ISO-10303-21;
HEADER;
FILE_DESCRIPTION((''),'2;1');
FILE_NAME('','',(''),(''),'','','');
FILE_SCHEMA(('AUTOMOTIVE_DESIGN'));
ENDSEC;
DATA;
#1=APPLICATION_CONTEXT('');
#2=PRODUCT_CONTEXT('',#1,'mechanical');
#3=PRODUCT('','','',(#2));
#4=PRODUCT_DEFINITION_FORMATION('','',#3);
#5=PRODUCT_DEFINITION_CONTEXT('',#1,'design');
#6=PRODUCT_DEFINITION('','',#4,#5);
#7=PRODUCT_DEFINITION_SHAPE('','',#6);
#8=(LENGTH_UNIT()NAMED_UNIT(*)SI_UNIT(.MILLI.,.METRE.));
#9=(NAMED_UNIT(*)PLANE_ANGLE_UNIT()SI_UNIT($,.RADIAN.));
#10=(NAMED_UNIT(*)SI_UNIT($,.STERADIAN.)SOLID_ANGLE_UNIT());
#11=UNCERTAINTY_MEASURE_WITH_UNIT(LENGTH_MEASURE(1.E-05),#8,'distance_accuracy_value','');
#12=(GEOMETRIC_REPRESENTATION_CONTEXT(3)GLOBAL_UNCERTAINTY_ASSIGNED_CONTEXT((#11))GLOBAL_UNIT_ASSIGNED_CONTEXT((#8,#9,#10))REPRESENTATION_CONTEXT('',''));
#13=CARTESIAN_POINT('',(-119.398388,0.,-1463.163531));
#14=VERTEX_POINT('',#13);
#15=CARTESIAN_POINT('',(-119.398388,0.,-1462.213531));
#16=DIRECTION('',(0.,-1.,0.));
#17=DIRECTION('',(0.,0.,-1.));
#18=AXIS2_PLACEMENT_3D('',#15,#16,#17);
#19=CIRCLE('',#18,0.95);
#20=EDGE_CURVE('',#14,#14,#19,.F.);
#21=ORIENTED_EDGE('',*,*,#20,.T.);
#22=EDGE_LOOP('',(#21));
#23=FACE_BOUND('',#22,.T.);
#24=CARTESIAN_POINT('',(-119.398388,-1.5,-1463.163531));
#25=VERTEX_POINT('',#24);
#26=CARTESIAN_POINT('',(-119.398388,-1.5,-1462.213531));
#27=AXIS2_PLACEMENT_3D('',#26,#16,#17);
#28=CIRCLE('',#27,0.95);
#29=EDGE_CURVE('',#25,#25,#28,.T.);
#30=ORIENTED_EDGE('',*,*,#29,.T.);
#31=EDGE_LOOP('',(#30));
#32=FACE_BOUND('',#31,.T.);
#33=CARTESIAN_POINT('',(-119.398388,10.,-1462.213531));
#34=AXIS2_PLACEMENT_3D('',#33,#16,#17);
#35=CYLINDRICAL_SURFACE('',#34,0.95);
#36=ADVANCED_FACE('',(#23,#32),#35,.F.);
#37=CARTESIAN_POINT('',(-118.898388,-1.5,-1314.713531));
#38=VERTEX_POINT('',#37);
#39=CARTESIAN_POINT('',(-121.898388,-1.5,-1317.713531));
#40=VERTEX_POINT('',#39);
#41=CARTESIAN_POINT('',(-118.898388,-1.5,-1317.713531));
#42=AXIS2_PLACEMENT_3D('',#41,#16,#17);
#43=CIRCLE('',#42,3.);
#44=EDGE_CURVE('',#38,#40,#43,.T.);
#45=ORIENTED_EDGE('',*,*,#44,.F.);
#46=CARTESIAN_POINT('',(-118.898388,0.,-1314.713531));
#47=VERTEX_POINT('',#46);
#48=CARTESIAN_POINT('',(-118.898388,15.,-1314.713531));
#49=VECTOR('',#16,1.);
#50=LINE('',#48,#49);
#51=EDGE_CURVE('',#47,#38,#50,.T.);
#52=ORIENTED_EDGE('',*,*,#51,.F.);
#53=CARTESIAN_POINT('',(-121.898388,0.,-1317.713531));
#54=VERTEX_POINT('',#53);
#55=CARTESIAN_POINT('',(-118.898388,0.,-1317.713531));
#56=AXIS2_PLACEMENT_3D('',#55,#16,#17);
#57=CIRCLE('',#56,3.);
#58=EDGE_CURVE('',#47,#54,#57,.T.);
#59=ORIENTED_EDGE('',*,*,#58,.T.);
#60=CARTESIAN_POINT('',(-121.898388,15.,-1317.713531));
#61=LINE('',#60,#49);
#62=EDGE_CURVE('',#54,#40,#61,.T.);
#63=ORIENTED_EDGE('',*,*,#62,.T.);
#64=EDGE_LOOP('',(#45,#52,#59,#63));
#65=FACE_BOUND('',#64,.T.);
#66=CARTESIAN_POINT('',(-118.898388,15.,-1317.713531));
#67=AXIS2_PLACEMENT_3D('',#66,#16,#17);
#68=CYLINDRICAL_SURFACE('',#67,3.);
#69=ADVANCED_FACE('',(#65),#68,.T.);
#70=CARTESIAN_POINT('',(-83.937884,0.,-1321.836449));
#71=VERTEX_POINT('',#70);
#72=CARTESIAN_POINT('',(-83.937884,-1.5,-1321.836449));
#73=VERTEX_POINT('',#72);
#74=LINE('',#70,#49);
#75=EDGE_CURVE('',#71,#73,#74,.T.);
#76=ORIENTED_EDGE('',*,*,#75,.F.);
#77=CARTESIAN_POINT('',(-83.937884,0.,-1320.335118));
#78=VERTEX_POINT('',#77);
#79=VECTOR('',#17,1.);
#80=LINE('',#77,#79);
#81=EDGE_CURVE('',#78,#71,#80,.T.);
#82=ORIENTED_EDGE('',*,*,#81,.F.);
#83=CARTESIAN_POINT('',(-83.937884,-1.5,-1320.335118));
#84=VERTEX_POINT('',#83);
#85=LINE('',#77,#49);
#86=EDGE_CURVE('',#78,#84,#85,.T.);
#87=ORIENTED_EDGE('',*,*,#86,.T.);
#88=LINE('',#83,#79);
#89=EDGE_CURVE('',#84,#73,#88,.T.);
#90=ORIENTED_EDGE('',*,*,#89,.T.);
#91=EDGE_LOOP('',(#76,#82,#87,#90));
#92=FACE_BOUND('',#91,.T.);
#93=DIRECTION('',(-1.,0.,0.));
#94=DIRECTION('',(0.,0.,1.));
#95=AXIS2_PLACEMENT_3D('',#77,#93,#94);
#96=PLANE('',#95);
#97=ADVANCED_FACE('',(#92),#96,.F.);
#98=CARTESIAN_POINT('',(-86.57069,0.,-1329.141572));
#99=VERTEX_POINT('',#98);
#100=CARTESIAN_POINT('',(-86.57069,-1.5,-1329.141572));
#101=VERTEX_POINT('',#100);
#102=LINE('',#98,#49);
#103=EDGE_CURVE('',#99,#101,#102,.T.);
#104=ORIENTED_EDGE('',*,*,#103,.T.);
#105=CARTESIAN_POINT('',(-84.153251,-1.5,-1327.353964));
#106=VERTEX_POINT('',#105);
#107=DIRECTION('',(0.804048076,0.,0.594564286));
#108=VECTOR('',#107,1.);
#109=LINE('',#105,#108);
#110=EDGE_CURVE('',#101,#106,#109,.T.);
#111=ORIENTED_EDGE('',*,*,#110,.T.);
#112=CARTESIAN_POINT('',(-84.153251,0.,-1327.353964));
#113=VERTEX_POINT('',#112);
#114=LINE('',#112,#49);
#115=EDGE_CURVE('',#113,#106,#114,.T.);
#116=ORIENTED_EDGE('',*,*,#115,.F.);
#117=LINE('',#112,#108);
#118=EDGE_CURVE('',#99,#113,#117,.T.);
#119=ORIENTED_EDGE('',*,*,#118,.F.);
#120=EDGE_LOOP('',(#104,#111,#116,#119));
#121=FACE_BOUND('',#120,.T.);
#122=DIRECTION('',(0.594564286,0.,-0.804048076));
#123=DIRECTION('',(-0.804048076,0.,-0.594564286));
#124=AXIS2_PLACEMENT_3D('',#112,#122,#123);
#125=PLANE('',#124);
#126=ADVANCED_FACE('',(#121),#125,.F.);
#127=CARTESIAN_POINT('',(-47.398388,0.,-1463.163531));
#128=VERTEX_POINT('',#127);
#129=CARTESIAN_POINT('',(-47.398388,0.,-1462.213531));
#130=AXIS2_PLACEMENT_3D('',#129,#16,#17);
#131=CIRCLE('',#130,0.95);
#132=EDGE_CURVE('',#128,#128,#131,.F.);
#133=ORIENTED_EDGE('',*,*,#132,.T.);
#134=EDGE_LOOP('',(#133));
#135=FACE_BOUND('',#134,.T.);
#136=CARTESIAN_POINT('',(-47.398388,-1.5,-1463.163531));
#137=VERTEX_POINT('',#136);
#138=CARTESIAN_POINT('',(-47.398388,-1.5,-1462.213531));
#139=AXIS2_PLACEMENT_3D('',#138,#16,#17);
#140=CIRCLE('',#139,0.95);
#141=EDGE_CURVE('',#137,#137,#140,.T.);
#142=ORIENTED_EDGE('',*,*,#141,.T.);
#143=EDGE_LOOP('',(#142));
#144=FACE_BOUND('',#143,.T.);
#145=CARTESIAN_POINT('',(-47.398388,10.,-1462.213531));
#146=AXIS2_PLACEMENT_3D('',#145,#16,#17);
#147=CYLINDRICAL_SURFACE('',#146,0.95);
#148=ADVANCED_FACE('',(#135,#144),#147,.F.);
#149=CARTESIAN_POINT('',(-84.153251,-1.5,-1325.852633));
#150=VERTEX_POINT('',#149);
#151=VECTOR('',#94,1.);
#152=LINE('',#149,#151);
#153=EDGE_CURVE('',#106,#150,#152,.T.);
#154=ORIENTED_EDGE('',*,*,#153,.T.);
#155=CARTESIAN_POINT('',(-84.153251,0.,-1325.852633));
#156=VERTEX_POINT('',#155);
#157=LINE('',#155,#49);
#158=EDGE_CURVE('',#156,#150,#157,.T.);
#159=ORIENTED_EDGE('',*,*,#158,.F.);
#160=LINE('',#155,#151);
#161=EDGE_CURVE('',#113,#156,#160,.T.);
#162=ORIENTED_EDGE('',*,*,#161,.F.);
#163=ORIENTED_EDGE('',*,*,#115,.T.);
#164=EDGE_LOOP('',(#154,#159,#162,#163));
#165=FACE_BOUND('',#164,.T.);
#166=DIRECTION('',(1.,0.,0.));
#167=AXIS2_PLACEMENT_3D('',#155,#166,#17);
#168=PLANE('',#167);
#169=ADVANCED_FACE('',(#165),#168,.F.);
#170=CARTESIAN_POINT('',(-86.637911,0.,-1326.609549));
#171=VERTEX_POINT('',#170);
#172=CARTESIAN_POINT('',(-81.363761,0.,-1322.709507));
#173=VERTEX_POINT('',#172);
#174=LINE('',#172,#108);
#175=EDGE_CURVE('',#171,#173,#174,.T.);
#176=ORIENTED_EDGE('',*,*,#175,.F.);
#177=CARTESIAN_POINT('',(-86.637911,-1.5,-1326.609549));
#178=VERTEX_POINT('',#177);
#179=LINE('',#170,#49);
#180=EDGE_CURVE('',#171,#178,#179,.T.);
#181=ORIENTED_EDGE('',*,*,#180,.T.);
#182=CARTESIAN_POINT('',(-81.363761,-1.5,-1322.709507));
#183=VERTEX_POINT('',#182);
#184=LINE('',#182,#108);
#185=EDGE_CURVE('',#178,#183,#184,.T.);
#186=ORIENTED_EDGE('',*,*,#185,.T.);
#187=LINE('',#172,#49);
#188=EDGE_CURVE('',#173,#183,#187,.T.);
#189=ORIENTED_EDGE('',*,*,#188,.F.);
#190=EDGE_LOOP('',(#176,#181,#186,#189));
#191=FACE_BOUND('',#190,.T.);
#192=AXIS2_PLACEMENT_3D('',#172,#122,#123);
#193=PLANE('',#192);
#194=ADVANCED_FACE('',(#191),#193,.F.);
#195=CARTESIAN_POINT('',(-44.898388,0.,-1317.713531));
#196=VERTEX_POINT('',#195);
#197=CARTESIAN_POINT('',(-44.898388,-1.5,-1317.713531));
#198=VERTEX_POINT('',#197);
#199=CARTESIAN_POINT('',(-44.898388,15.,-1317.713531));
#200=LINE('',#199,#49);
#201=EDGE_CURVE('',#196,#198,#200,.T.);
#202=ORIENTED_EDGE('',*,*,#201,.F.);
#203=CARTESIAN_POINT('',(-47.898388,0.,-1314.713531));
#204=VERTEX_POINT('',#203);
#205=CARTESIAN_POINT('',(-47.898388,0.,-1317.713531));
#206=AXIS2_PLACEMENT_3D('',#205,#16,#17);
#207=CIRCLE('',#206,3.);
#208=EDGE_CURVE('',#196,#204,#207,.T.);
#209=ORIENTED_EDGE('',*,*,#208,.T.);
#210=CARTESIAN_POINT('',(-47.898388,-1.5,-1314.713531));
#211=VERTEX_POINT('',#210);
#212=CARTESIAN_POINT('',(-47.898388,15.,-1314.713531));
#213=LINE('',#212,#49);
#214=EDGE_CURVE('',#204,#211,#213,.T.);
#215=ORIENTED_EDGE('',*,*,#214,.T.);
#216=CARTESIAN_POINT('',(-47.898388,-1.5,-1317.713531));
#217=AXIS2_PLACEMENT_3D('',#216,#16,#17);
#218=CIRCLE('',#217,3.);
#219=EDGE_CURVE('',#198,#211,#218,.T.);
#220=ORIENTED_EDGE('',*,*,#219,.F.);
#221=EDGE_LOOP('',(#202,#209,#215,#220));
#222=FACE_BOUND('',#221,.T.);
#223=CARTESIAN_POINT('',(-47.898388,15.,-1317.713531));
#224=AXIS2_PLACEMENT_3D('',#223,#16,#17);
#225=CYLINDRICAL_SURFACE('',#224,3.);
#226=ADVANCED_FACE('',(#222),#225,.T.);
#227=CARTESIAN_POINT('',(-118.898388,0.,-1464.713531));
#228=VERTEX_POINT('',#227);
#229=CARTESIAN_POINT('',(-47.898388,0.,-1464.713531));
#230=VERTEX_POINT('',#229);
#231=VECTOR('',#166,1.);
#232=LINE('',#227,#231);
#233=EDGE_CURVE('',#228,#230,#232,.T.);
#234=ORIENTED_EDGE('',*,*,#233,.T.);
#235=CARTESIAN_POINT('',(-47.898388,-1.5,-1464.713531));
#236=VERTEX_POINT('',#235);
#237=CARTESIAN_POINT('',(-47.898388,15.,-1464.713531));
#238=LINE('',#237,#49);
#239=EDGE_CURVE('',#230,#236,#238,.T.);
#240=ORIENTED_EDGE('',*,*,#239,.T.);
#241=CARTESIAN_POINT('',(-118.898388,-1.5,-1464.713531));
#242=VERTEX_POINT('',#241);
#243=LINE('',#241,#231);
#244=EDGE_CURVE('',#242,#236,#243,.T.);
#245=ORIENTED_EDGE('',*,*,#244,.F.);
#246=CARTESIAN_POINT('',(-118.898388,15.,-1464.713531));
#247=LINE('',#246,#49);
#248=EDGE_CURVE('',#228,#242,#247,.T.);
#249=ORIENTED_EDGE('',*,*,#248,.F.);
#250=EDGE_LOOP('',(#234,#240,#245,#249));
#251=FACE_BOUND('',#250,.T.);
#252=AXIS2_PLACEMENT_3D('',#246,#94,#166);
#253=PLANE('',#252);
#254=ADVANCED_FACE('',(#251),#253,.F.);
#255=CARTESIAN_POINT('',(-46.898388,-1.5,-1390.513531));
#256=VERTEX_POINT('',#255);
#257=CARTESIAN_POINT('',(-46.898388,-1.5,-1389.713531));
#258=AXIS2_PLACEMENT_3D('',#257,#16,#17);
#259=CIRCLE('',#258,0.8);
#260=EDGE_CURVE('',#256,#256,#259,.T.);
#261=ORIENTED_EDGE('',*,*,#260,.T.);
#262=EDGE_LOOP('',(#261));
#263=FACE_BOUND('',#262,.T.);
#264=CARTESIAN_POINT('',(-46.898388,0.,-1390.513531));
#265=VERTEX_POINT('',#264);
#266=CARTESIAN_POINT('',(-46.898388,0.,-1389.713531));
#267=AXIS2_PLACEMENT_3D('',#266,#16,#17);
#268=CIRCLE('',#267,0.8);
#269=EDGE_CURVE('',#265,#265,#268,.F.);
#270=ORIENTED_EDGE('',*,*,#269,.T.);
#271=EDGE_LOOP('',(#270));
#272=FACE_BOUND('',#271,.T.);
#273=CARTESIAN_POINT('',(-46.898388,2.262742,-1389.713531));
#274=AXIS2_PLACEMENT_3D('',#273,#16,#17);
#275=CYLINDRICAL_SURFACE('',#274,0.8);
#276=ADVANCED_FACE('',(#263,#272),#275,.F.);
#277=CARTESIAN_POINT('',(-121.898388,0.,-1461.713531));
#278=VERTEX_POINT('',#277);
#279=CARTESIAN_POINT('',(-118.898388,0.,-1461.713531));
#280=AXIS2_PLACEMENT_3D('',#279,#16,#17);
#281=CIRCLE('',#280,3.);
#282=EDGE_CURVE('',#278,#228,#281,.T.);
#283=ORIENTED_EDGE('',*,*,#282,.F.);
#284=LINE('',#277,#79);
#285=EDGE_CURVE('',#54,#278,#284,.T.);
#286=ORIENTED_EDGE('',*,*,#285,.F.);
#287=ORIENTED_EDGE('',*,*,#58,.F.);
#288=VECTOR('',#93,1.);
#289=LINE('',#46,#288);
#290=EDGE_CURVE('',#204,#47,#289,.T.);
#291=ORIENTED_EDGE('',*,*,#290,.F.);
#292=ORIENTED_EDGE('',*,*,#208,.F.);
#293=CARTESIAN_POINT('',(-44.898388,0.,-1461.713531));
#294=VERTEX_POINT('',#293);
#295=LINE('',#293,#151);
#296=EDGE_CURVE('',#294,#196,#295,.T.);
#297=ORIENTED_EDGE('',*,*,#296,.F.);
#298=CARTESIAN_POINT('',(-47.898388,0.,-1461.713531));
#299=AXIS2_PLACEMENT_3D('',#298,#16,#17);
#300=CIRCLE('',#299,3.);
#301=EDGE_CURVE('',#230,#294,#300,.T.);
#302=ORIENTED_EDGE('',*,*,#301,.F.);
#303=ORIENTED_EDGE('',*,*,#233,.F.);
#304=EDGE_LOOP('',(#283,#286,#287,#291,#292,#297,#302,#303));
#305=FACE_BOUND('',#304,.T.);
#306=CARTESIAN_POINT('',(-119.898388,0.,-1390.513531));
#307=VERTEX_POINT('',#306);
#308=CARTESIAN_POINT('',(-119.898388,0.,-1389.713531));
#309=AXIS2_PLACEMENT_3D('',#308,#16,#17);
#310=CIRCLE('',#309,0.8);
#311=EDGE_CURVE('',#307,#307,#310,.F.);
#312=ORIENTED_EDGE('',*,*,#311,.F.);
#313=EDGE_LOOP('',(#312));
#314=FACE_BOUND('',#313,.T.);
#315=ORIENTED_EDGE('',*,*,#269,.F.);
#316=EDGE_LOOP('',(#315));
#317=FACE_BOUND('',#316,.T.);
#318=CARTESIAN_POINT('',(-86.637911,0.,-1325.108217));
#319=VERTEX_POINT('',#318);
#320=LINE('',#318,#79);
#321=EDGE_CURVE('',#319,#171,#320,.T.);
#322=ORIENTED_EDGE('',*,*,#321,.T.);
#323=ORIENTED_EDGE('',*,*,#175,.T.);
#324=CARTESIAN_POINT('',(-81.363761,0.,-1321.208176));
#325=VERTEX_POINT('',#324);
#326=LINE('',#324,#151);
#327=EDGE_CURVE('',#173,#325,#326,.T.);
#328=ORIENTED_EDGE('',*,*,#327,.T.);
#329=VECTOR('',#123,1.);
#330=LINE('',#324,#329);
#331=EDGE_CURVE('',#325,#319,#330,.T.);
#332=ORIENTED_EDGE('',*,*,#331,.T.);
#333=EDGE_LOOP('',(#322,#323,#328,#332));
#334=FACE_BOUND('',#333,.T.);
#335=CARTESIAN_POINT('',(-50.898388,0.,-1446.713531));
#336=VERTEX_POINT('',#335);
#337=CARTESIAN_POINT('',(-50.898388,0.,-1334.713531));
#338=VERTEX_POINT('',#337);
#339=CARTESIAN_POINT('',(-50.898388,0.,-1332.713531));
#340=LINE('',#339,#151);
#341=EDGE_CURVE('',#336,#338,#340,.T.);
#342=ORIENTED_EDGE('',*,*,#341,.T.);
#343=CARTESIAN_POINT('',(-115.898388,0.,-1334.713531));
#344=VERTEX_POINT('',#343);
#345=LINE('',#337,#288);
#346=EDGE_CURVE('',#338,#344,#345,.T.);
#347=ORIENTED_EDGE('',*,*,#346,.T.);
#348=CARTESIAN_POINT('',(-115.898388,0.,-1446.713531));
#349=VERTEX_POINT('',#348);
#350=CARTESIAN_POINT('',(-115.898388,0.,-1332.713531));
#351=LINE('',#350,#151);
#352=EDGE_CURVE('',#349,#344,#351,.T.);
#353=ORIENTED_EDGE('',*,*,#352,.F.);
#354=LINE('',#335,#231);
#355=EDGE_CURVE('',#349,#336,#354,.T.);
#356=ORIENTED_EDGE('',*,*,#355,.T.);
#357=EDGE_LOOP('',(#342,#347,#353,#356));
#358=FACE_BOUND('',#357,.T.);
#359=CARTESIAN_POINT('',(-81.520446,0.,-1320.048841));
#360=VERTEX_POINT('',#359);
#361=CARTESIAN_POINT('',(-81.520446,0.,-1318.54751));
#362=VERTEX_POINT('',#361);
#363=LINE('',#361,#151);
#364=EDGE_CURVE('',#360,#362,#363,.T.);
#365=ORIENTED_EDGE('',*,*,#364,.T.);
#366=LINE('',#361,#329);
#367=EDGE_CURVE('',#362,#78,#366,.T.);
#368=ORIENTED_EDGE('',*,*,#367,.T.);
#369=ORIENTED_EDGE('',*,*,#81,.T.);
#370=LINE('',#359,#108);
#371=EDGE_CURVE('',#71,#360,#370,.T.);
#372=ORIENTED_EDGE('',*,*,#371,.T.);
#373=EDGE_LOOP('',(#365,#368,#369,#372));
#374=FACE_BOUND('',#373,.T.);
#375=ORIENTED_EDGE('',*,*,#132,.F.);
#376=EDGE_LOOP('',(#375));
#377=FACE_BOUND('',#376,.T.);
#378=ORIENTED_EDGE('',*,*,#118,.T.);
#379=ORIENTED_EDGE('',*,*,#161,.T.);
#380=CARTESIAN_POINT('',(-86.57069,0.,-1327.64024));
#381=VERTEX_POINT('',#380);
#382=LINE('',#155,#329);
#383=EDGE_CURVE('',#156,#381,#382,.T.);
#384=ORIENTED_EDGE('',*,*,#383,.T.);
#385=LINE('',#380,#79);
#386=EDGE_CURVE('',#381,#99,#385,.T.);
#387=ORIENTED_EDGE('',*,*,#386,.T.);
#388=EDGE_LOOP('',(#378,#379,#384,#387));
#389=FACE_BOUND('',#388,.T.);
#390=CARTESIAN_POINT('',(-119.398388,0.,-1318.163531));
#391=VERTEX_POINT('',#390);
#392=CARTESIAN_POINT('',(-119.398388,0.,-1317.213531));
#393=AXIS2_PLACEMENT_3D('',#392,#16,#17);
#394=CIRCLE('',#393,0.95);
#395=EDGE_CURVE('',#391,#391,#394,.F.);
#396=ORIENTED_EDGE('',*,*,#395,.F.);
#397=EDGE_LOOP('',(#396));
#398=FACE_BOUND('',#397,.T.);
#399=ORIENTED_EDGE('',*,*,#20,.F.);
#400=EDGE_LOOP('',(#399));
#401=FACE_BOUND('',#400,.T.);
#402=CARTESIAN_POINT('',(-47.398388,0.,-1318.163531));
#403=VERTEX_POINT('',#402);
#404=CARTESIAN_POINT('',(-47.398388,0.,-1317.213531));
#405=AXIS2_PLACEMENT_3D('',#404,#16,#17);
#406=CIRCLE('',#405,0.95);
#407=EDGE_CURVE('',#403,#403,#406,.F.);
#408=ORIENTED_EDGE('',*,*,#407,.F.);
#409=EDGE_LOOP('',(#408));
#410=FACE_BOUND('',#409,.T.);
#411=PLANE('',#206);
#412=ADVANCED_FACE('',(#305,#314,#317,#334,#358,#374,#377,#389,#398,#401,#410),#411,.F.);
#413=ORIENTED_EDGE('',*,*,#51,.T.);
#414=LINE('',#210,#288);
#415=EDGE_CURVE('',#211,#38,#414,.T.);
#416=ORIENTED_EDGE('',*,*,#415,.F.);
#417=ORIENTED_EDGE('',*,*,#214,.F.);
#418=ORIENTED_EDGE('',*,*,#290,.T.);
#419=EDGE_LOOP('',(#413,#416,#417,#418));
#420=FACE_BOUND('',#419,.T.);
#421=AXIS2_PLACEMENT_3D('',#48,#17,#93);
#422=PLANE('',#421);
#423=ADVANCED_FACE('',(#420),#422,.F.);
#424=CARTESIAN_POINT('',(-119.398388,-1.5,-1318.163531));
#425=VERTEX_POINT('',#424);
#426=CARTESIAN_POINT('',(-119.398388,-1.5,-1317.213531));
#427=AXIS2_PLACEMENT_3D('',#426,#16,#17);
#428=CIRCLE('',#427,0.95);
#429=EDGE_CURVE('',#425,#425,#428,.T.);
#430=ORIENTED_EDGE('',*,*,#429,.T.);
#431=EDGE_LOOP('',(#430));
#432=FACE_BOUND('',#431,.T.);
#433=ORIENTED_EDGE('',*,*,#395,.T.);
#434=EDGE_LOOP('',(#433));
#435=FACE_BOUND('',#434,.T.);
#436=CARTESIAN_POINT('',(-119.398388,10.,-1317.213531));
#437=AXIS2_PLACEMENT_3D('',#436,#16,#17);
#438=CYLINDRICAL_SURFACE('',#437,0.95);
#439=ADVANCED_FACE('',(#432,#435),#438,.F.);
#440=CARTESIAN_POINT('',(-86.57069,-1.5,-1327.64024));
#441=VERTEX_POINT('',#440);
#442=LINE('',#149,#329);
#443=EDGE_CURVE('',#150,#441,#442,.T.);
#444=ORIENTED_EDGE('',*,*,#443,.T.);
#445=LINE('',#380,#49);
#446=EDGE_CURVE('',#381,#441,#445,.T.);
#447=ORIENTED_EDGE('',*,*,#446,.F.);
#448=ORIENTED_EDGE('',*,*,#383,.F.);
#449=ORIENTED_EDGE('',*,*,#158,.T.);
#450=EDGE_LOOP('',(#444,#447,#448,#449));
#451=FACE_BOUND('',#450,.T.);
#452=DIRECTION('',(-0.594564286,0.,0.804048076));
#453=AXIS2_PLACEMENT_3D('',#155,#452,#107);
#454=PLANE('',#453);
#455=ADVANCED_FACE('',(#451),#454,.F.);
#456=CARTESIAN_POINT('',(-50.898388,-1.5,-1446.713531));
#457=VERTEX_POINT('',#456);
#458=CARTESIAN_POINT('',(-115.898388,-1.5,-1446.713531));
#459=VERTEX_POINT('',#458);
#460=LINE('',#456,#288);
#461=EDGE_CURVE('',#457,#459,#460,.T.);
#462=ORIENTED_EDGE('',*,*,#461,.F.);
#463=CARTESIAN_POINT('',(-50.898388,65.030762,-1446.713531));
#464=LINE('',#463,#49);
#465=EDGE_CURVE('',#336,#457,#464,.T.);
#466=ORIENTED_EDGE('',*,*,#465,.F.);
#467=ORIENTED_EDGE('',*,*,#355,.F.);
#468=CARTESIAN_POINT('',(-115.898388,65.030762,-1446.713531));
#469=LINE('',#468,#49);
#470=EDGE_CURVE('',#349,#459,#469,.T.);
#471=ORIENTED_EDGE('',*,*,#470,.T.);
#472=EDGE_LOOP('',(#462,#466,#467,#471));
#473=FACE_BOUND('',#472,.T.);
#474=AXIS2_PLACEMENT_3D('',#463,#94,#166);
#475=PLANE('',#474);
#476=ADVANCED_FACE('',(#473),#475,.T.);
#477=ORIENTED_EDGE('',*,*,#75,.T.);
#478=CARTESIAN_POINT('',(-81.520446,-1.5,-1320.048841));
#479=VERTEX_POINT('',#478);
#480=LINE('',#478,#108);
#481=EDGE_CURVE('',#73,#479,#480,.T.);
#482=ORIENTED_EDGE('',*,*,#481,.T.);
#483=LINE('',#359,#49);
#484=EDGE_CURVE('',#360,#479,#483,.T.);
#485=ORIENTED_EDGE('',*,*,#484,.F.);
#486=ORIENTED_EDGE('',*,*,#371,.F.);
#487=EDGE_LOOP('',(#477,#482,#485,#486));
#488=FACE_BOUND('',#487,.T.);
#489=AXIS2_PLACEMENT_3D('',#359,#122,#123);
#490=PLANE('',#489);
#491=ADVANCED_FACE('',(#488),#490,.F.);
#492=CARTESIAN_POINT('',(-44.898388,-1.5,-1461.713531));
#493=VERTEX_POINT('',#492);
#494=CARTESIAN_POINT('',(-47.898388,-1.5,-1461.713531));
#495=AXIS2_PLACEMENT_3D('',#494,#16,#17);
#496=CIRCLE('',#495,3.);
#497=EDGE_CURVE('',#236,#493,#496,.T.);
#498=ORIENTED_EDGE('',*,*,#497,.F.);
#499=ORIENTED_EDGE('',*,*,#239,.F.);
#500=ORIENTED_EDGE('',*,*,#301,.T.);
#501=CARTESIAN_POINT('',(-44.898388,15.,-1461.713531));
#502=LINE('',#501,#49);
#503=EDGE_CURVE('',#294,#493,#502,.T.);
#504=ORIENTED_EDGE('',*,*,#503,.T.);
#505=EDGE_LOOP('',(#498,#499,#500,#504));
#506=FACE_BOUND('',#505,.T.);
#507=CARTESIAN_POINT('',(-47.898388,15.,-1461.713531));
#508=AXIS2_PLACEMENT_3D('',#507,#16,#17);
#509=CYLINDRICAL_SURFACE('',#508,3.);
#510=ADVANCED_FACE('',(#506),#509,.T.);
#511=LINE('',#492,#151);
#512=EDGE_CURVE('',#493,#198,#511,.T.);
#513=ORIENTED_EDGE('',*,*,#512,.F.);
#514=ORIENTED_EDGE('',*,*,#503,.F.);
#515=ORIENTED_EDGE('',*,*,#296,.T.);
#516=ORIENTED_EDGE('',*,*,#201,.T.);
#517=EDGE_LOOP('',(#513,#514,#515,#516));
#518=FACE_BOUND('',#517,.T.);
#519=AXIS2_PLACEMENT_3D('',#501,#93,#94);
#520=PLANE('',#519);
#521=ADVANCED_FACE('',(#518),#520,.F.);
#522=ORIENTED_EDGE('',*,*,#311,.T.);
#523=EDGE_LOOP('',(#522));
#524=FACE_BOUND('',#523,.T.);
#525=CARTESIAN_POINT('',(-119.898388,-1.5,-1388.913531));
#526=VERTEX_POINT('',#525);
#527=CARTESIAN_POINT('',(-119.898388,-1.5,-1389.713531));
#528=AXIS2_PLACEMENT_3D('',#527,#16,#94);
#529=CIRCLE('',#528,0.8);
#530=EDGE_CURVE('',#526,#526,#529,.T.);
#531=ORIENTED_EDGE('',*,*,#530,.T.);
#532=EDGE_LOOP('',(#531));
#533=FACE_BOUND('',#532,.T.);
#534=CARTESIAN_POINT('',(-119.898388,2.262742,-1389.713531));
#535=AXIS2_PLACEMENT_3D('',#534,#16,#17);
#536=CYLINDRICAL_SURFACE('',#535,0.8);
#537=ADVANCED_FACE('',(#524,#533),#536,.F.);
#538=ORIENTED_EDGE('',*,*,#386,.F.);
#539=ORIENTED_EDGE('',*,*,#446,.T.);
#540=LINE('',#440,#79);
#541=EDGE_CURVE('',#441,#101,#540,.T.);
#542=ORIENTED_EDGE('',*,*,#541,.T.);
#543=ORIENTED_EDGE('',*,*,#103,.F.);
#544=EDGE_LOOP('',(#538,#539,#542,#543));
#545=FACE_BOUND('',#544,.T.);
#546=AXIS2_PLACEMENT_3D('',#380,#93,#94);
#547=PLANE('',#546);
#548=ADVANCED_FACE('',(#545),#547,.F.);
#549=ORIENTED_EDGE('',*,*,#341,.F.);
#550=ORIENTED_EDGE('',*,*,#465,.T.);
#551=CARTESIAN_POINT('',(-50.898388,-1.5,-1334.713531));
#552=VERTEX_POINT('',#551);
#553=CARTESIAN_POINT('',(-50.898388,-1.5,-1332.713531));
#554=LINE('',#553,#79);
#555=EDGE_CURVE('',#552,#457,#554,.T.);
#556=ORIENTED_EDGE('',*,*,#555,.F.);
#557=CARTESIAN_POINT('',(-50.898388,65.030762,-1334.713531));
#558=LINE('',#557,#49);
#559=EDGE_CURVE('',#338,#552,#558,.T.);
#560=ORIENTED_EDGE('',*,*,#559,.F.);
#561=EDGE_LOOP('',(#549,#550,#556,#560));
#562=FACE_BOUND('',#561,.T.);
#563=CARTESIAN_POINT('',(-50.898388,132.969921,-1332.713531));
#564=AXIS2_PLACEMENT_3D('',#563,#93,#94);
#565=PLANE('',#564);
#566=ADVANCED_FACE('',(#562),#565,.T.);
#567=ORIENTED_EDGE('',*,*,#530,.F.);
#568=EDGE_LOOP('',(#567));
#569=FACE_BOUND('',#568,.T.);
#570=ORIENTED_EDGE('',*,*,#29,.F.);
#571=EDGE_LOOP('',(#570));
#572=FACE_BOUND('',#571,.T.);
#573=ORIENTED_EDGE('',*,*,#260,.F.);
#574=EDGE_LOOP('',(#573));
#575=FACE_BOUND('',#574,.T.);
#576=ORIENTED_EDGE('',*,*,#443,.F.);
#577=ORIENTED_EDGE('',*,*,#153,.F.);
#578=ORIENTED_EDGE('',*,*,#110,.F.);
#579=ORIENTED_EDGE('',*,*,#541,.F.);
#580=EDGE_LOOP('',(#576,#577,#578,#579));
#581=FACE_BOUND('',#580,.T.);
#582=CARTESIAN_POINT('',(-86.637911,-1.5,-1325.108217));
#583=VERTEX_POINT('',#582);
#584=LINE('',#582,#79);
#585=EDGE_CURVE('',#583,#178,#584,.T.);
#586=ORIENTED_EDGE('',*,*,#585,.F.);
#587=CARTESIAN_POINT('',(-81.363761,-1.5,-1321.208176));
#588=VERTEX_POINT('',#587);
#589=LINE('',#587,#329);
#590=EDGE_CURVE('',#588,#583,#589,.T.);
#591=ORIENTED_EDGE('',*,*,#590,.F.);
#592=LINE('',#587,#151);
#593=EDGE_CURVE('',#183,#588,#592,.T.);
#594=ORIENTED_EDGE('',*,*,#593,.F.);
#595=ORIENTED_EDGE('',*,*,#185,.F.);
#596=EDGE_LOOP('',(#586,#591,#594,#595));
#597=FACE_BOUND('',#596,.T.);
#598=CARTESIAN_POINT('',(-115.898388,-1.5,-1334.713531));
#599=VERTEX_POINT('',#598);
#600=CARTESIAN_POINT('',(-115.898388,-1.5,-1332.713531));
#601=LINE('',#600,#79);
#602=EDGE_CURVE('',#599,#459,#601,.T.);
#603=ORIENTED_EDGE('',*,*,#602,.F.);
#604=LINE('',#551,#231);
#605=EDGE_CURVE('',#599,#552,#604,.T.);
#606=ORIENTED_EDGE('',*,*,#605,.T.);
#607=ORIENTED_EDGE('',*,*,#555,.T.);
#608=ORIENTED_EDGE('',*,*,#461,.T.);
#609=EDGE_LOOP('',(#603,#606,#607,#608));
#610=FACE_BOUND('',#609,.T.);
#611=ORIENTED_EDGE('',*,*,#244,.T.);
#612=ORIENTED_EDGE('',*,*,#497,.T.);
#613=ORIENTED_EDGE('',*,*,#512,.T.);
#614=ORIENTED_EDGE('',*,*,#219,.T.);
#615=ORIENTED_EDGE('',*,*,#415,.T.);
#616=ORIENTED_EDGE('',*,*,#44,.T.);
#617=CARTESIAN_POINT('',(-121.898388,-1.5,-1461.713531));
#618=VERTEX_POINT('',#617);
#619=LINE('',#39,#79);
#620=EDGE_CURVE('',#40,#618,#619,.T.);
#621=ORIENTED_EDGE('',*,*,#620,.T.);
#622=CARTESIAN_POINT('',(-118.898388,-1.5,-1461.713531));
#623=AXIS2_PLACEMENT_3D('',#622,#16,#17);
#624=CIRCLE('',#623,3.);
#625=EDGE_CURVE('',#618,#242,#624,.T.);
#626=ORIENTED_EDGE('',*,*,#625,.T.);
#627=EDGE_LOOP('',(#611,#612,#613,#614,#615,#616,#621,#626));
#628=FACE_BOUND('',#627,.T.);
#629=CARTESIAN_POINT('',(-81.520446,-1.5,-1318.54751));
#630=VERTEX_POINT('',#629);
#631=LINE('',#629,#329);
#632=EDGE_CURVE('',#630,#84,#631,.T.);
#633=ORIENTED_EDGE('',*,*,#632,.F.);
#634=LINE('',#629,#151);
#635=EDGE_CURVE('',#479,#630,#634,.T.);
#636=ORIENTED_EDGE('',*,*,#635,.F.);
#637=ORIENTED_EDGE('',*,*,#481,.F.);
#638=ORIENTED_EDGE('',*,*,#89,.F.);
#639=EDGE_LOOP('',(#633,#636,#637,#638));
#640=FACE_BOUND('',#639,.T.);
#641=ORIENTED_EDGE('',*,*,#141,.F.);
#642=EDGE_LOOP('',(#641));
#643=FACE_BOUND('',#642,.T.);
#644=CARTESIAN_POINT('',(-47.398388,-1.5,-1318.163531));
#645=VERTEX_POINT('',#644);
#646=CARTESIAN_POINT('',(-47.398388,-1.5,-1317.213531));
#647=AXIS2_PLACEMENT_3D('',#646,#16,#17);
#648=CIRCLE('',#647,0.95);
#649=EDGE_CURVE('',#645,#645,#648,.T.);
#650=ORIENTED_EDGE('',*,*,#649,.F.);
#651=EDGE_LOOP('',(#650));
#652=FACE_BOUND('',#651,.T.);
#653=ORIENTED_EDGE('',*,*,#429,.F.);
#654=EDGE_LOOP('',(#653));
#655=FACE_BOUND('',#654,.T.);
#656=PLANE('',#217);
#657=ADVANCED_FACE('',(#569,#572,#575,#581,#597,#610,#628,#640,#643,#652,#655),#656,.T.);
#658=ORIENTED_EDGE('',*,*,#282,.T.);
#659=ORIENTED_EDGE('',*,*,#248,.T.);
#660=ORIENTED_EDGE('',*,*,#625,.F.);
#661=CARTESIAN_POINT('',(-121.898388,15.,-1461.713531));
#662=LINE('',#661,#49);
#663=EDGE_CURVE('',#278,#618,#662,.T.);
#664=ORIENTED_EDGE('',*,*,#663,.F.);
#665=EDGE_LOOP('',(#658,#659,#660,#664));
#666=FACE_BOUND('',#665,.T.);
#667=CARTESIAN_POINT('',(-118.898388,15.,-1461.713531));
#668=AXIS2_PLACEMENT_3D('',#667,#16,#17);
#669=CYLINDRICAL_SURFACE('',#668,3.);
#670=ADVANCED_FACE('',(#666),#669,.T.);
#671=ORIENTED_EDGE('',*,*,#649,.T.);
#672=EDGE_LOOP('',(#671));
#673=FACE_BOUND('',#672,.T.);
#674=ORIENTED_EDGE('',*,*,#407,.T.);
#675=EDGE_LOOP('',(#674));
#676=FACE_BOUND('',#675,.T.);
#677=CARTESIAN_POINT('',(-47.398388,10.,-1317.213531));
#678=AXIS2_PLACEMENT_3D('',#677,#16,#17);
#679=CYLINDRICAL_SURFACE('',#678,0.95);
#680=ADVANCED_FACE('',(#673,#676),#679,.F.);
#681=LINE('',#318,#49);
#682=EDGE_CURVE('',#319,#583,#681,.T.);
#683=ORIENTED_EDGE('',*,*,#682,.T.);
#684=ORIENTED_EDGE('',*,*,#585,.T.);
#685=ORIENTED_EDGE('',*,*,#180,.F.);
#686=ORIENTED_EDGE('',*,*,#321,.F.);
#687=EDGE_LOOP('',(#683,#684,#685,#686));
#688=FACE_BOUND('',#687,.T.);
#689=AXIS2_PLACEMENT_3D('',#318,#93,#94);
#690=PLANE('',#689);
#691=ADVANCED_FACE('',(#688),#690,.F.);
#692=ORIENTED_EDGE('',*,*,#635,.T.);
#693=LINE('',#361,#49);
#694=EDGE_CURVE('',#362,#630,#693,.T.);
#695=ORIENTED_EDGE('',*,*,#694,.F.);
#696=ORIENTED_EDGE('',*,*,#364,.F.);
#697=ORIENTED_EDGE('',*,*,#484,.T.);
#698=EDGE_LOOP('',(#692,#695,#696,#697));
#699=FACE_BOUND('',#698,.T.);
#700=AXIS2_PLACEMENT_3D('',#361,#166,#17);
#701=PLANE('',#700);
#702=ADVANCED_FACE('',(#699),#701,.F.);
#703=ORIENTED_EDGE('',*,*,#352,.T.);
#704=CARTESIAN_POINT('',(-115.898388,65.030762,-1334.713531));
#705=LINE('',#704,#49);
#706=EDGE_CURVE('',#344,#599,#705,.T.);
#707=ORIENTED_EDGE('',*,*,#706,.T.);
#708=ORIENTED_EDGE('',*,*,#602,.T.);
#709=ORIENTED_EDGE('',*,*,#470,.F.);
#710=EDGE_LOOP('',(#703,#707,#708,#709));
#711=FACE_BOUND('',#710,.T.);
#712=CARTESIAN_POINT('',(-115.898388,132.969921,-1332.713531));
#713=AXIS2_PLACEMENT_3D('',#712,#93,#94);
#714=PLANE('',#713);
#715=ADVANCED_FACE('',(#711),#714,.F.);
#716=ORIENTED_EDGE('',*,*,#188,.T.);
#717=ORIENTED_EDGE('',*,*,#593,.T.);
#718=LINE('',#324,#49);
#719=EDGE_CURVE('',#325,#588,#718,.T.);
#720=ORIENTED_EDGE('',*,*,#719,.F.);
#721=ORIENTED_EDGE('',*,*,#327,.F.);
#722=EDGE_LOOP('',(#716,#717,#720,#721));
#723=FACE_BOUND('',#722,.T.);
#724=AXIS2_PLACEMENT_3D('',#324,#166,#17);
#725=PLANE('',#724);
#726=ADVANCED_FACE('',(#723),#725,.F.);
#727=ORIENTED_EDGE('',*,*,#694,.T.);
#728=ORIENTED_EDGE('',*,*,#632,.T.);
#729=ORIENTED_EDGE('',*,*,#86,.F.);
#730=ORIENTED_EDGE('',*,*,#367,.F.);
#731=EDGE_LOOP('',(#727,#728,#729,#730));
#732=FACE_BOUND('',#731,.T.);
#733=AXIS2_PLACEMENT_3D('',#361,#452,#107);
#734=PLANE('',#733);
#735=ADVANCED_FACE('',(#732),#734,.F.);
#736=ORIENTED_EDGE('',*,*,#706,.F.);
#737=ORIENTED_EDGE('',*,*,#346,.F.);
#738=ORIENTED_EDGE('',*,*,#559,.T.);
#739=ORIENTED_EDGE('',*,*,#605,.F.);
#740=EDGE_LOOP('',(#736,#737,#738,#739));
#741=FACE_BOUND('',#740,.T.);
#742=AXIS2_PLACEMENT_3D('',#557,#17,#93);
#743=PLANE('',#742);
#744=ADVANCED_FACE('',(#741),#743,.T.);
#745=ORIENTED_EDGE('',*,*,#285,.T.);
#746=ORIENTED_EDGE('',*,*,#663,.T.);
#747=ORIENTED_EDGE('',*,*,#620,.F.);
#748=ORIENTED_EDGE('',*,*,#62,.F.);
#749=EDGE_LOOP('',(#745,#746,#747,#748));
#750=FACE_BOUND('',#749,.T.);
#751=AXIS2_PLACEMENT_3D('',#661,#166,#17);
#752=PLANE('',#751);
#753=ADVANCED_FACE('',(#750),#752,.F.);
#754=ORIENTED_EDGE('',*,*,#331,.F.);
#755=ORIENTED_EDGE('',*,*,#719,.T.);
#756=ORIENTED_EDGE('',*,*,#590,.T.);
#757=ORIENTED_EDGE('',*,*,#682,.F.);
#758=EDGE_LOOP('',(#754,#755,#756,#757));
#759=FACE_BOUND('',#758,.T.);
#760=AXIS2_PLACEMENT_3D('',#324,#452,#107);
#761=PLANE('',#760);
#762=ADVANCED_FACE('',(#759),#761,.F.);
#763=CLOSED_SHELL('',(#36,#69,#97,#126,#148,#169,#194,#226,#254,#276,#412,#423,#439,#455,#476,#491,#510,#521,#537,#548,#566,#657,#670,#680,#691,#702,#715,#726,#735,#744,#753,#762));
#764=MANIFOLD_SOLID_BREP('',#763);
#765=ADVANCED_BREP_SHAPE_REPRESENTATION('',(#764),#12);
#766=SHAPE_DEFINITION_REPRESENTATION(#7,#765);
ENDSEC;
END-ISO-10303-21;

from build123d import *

# Parameters (mm, degrees)
EXTRUDE_1_DEPTH     = 15
FILLET_1_R          = 1
EXTRUDE_START       = -2
SKETCH_2_R          = 1.5
EXTRUDE_2_DEPTH     = 2
FILLET_7_R          = 1
FILLET_2_R          = 1
FILLET_3_R          = 1
FILLET_4_R          = 1
SKETCH_3_R          = 0.95
CUT_EXTRUDE_1_DEPTH = 10
EXTRUDE_3_DEPTH     = 3
FILLET_6_R          = 1
SKETCH_5_R          = 1
CUT_EXTRUDE_2_DEPTH = 2
EXTRUDE_START_2     = 1.5
SKETCH_6_R          = 0.95
EXTRUDE_4_DEPTH     = 1.5
SKETCH_7_W          = 91.570704936
SKETCH_7_H          = 168.371941333
CUT_EXTRUDE_3_DEPTH = 15
SKETCH_8_W          = 65
SKETCH_8_H          = 116
CUT_EXTRUDE_4_DEPTH = 1.5
CUT_EXTRUDE_5_DEPTH = 1.5
SKETCH_10_W         = 65
SKETCH_10_H         = 2
EXTRUDE_5_DEPTH     = 1.5
SKETCH_11_R         = 0.8
CUT_EXTRUDE_6_DEPTH = 1.5


with BuildPart() as part:
    # 草图1 → 凸台-拉伸1 (new body)
    with BuildSketch(Plane(origin=(0.249036734, 0, -75.707167104), x_dir=(1, 0, 0), z_dir=(0, 1, 0))):
        with BuildLine():
            Line((-45.147424513, 1386.006364089), (-45.147424513, 1242.006364089))
            ThreePointArc((-45.147424513, 1242.006364089), (-46.02610417, 1239.885043746), (-48.147424513, 1239.006364089))
            Line((-48.147424513, 1239.006364089), (-119.147424513, 1239.006364089))
            ThreePointArc((-119.147424513, 1239.006364089), (-121.268744857, 1239.885043746), (-122.147424513, 1242.006364089))
            Line((-122.147424513, 1242.006364089), (-122.147424513, 1386.006364089))
            ThreePointArc((-122.147424513, 1386.006364089), (-121.268744857, 1388.127684433), (-119.147424513, 1389.006364089))
            Line((-119.147424513, 1389.006364089), (-48.147424513, 1389.006364089))
            ThreePointArc((-48.147424513, 1389.006364089), (-46.02610417, 1388.127684433), (-45.147424513, 1386.006364089))
        make_face()
        with BuildLine():
            Line((-110.647424513, 1387.506364089), (-86.803457574, 1387.506364089))
            Line((-86.803457574, 1387.506364089), (-86.803457574, 1384.506364089))
            Line((-86.803457574, 1384.506364089), (-79.369983761, 1384.506364089))
            Line((-79.369983761, 1384.506364089), (-79.369983761, 1387.506364089))
            Line((-79.369983761, 1387.506364089), (-56.647424513, 1387.506364089))
            ThreePointArc((-56.647424513, 1387.506364089), (-49.576356701, 1384.577431901), (-46.647424513, 1377.506364089))
            Line((-46.647424513, 1377.506364089), (-46.647424513, 1369.006364089))
            Line((-46.647424513, 1369.006364089), (-49.044172281, 1369.006364089))
            Line((-49.044172281, 1369.006364089), (-49.044172281, 1366.006364089))
            Line((-49.044172281, 1366.006364089), (-46.647424513, 1366.006364089))
            Line((-46.647424513, 1366.006364089), (-46.647424513, 1262.006364089))
            Line((-46.647424513, 1262.006364089), (-49.044172281, 1262.006364089))
            Line((-49.044172281, 1262.006364089), (-49.044172281, 1259.006364089))
            Line((-49.044172281, 1259.006364089), (-46.647424513, 1259.006364089))
            Line((-46.647424513, 1259.006364089), (-46.647424513, 1250.506364089))
            ThreePointArc((-46.647424513, 1250.506364089), (-49.576356701, 1243.435296277), (-56.647424513, 1240.506364089))
            Line((-56.647424513, 1240.506364089), (-80.788236334, 1240.506364089))
            Line((-80.788236334, 1240.506364089), (-80.788236334, 1243.506364089))
            Line((-80.788236334, 1243.506364089), (-86.803457574, 1243.506364089))
            Line((-86.803457574, 1243.506364089), (-86.803457574, 1240.506364089))
            Line((-86.803457574, 1240.506364089), (-110.647424513, 1240.506364089))
            ThreePointArc((-110.647424513, 1240.506364089), (-117.718492325, 1243.435296277), (-120.647424513, 1250.506364089))
            Line((-120.647424513, 1250.506364089), (-120.647424513, 1259.006364089))
            Line((-120.647424513, 1259.006364089), (-118.250676745, 1259.006364089))
            Line((-118.250676745, 1259.006364089), (-118.250676745, 1262.006364089))
            Line((-118.250676745, 1262.006364089), (-120.647424513, 1262.006364089))
            Line((-120.647424513, 1262.006364089), (-120.647424513, 1366.006364089))
            Line((-120.647424513, 1366.006364089), (-118.250676745, 1366.006364089))
            Line((-118.250676745, 1366.006364089), (-118.250676745, 1369.006364089))
            Line((-118.250676745, 1369.006364089), (-120.647424513, 1369.006364089))
            Line((-120.647424513, 1369.006364089), (-120.647424513, 1377.506364089))
            ThreePointArc((-120.647424513, 1377.506364089), (-117.718492325, 1384.577431901), (-110.647424513, 1387.506364089))
        make_face(mode=Mode.SUBTRACT)
    extrude(amount=EXTRUDE_1_DEPTH)

    # 圆角1
    fillet_1_edges = [part.edges().sort_by_distance(p)[0] for p in [
        (-48.795135547, 7.5, -1334.713531194),
        (-48.795135547, 7.5, -1337.713531194),
        (-48.795135547, 7.5, -1441.713531194),
        (-48.795135547, 7.5, -1444.713531194),
        (-79.120947027, 7.5, -1460.213531194),
        (-86.55442084, 7.5, -1460.213531194),
        (-118.001640012, 7.5, -1444.713531194),
        (-118.001640012, 7.5, -1441.713531194),
        (-118.001640012, 7.5, -1337.713531194),
        (-118.001640012, 7.5, -1334.713531194),
        (-86.55442084, 7.5, -1319.213531194),
        (-80.5391996, 7.5, -1319.213531194),
    ]]
    fillet(fillet_1_edges, radius=FILLET_1_R)

    # 草图2 → 凸台-拉伸2 (add)
    with BuildSketch(Plane(origin=(0.249036734, 15, -75.707167104), x_dir=(1, 0, 0), z_dir=(0, 1, 0)).offset(EXTRUDE_START)):
        with BuildLine():
            Line((-45.147424513, 1242.006364089), (-45.147424513, 1386.006364089))
            ThreePointArc((-45.147424513, 1386.006364089), (-46.02610417, 1388.127684433), (-48.147424513, 1389.006364089))
            Line((-48.147424513, 1389.006364089), (-119.147424513, 1389.006364089))
            ThreePointArc((-119.147424513, 1389.006364089), (-121.268744857, 1388.127684433), (-122.147424513, 1386.006364089))
            Line((-122.147424513, 1386.006364089), (-122.147424513, 1242.006364089))
            ThreePointArc((-122.147424513, 1242.006364089), (-121.268744857, 1239.885043746), (-119.147424513, 1239.006364089))
            Line((-119.147424513, 1239.006364089), (-48.147424513, 1239.006364089))
            ThreePointArc((-48.147424513, 1239.006364089), (-46.02610417, 1239.885043746), (-45.147424513, 1242.006364089))
        make_face()
        with Locations(Location((-84.647424513, 1378.506364089, 0), (0, 0, 270))):
            Circle(SKETCH_2_R, mode=Mode.SUBTRACT)
        with Locations(Location((-84.647424513, 1328.506364089, 0), (0, 0, 270))):
            Circle(SKETCH_2_R, mode=Mode.SUBTRACT)
        with BuildLine():
            Line((-65.147424513, 1308.756575121), (-65.147424513, 1318.506364089))
            ThreePointArc((-65.147424513, 1318.506364089), (-65.440317732, 1319.21347087), (-66.147424513, 1319.506364089))
            Line((-66.147424513, 1319.506364089), (-92.147424513, 1319.506364089))
            ThreePointArc((-92.147424513, 1319.506364089), (-92.854531294, 1319.21347087), (-93.147424513, 1318.506364089))
            Line((-93.147424513, 1318.506364089), (-93.147424513, 1313.006364089))
            ThreePointArc((-93.147424513, 1313.006364089), (-93.440317732, 1312.299257308), (-94.147424513, 1312.006364089))
            Line((-94.147424513, 1312.006364089), (-95.147424513, 1312.006364089))
            ThreePointArc((-95.147424513, 1312.006364089), (-95.854531294, 1311.71347087), (-96.147424513, 1311.006364089))
            Line((-96.147424513, 1311.006364089), (-96.147424513, 1305.006364089))
            ThreePointArc((-96.147424513, 1305.006364089), (-95.854531294, 1304.299257308), (-95.147424513, 1304.006364089))
            Line((-95.147424513, 1304.006364089), (-86.147424513, 1304.006364089))
            ThreePointArc((-86.147424513, 1304.006364089), (-85.440317732, 1303.71347087), (-85.147424513, 1303.006364089))
            Line((-85.147424513, 1303.006364089), (-85.147424513, 1274.006364089))
            ThreePointArc((-85.147424513, 1274.006364089), (-84.854531294, 1273.299257308), (-84.147424513, 1273.006364089))
            Line((-84.147424513, 1273.006364089), (-65.147424513, 1273.006364089))
            Line((-65.147424513, 1273.006364089), (-64.147424513, 1273.006364089))
            Line((-64.147424513, 1273.006364089), (-64.147424513, 1269.756575121))
            ThreePointArc((-64.147424513, 1269.756575121), (-63.854531294, 1269.04946834), (-63.147424513, 1268.756575121))
            Line((-63.147424513, 1268.756575121), (-56.817685319, 1268.756575121))
            ThreePointArc((-56.817685319, 1268.756575121), (-56.110578538, 1269.04946834), (-55.817685319, 1269.756575121))
            Line((-55.817685319, 1269.756575121), (-55.817685319, 1308.756575121))
            Line((-55.817685319, 1308.756575121), (-65.147424513, 1308.756575121))
        make_face(mode=Mode.SUBTRACT)
        with BuildLine():
            Line((-89.147424513, 1277.506364089), (-99.147424513, 1277.506364089))
            ThreePointArc((-99.147424513, 1277.506364089), (-99.854531294, 1277.799257308), (-100.147424513, 1278.506364089))
            Line((-100.147424513, 1278.506364089), (-100.147424513, 1283.506364089))
            ThreePointArc((-100.147424513, 1283.506364089), (-99.854531294, 1284.21347087), (-99.147424513, 1284.506364089))
            Line((-99.147424513, 1284.506364089), (-89.147424513, 1284.506364089))
            ThreePointArc((-89.147424513, 1284.506364089), (-88.440317732, 1284.21347087), (-88.147424513, 1283.506364089))
            Line((-88.147424513, 1283.506364089), (-88.147424513, 1278.506364089))
            ThreePointArc((-88.147424513, 1278.506364089), (-88.440317732, 1277.799257308), (-89.147424513, 1277.506364089))
        make_face(mode=Mode.SUBTRACT)
        with BuildLine():
            Line((-104.147424513, 1374.006364089), (-65.147424513, 1374.006364089))
            ThreePointArc((-65.147424513, 1374.006364089), (-64.440317732, 1373.71347087), (-64.147424513, 1373.006364089))
            Line((-64.147424513, 1373.006364089), (-64.147424513, 1334.006364089))
            ThreePointArc((-64.147424513, 1334.006364089), (-64.440317732, 1333.299257308), (-65.147424513, 1333.006364089))
            Line((-65.147424513, 1333.006364089), (-104.147424513, 1333.006364089))
            ThreePointArc((-104.147424513, 1333.006364089), (-104.854531294, 1333.299257308), (-105.147424513, 1334.006364089))
            Line((-105.147424513, 1334.006364089), (-105.147424513, 1373.006364089))
            ThreePointArc((-105.147424513, 1373.006364089), (-104.854531294, 1373.71347087), (-104.147424513, 1374.006364089))
        make_face(mode=Mode.SUBTRACT)
    extrude(amount=EXTRUDE_2_DEPTH)

    # 圆角7
    fillet_7_edges = [part.edges().sort_by_distance(p)[0] for p in [
        (-63.898387779, 14, -1348.713531194),
        (-64.898387779, 14, -1384.463742225),
        (-55.568648585, 14, -1384.463742225),
    ]]
    fillet(fillet_7_edges, radius=FILLET_7_R)

    # 圆角2
    fillet_2_edges = [part.edges().sort_by_distance(p)[0] for p in [
        (-78.898387779, 15, -1395.213531194),
        (-92.60549456, 15, -1394.920637975),
        (-92.898387779, 15, -1391.463531194),
        (-93.191280998, 15, -1388.006424412),
        (-94.398387779, 15, -1387.713531194),
        (-95.60549456, 15, -1387.420637975),
        (-95.898387779, 15, -1383.713531194),
        (-95.60549456, 15, -1380.006424412),
        (-90.398387779, 15, -1379.713531194),
        (-85.191280998, 15, -1379.420637975),
        (-84.898387779, 15, -1364.213531194),
        (-84.60549456, 15, -1349.006424412),
        (-74.398387779, 15, -1348.713531194),
        (-64.898387779, 15, -1389.838636709),
        (-65.191280998, 15, -1394.920637975),
        (-93.898387779, 15, -1360.213531194),
        (-99.60549456, 15, -1359.920637975),
        (-99.898387779, 15, -1356.713531194),
        (-99.60549456, 15, -1353.506424412),
        (-93.898387779, 15, -1353.213531194),
        (-88.191280998, 15, -1353.506424412),
        (-87.898387779, 15, -1356.713531194),
        (-88.191280998, 15, -1359.920637975),
        (-83.398387779, 15, -1314.713531194),
        (-121.019708123, 15, -1315.59221085),
        (-121.898387779, 15, -1389.713531194),
        (-121.019708123, 15, -1463.834851537),
        (-83.398387779, 15, -1464.713531194),
        (-45.777067436, 15, -1463.834851537),
        (-44.898387779, 15, -1389.713531194),
        (-45.777067436, 15, -1315.59221085),
        (-63.898387779, 15, -1429.213531194),
        (-64.191280998, 15, -1449.420637975),
        (-84.398387779, 15, -1449.713531194),
        (-104.60549456, 15, -1449.420637975),
        (-104.898387779, 15, -1429.213531194),
        (-104.60549456, 15, -1409.006424412),
        (-84.398387779, 15, -1408.713531194),
        (-64.191280998, 15, -1409.006424412),
        (-84.398387779, 15, -1455.713531194),
        (-84.398387779, 15, -1405.713531194),
        (-59.733518182, 15, -1344.463742225),
        (-55.861541804, 15, -1344.756635444),
        (-55.568648585, 15, -1364.463742225),
        (-60.233518182, 15, -1384.463742225),
        (-63.898387779, 15, -1346.588636709),
        (-63.60549456, 15, -1344.756635444),
        (-55.861541804, 15, -1384.170849006),
        (-64.60549456, 15, -1384.756635444),
        (-64.191280998, 15, -1348.420637975),
    ]]
    fillet(fillet_2_edges, radius=FILLET_2_R)

    # 圆角3
    fillet_3_edges = [part.edges().sort_by_distance(p)[0] for p in [
        (-48.795135547, 0, -1336.213531194),
        (-47.096761663, 0, -1337.713531194),
        (-48.795135547, 0, -1443.213531194),
        (-47.096761663, 0, -1444.713531194),
        (-82.837683934, 0, -1460.213531194),
        (-86.55442084, 0, -1462.213531194),
        (-118.001640012, 0, -1443.213531194),
        (-119.700013895, 0, -1441.713531194),
        (-118.001640012, 0, -1336.213531194),
        (-119.700013895, 0, -1334.713531194),
        (-118.29453323, 0, -1444.420637975),
        (-118.29453323, 0, -1442.006424412),
        (-48.502242328, 0, -1444.420637975),
        (-48.502242328, 0, -1442.006424412),
        (-48.502242328, 0, -1337.420637975),
        (-48.502242328, 0, -1335.006424412),
        (-118.29453323, 0, -1337.420637975),
        (-118.29453323, 0, -1335.006424412),
        (-86.261527622, 0, -1460.506424412),
        (-79.413840246, 0, -1460.506424412),
        (-47.096761663, 0, -1334.713531194),
        (-47.096761663, 0, -1441.713531194),
        (-79.120947027, 0, -1462.213531194),
        (-119.700013895, 0, -1444.713531194),
        (-119.700013895, 0, -1337.713531194),
    ]]
    fillet(fillet_3_edges, radius=FILLET_3_R)

    # 圆角4
    fillet_4_edges = [part.edges().sort_by_distance(p)[0] for p in [
        (-74.398387779, 13, -1348.713531194),
        (-84.60549456, 13, -1349.006424412),
        (-84.898387779, 13, -1364.213531194),
        (-85.191280998, 13, -1379.420637975),
        (-90.398387779, 13, -1379.713531194),
        (-95.60549456, 13, -1380.006424412),
        (-95.898387779, 13, -1383.713531194),
        (-95.60549456, 13, -1387.420637975),
        (-94.398387779, 13, -1387.713531194),
        (-93.191280998, 13, -1388.006424412),
        (-92.898387779, 13, -1391.463531194),
        (-92.60549456, 13, -1394.920637975),
        (-78.898387779, 13, -1395.213531194),
        (-65.191280998, 13, -1394.920637975),
        (-64.898387779, 13, -1389.838636709),
        (-88.191280998, 13, -1353.506424412),
        (-93.898387779, 13, -1353.213531194),
        (-99.60549456, 13, -1353.506424412),
        (-99.898387779, 13, -1356.713531194),
        (-99.60549456, 13, -1359.920637975),
        (-93.898387779, 13, -1360.213531194),
        (-88.191280998, 13, -1359.920637975),
        (-87.898387779, 13, -1356.713531194),
        (-86.261527622, 13, -1318.920637975),
        (-83.54681022, 13, -1319.213531194),
        (-80.832092819, 13, -1318.920637975),
        (-80.5391996, 13, -1317.213531194),
        (-68.46879369, 13, -1316.213531194),
        (-49.327319967, 13, -1319.142463382),
        (-46.398387779, 13, -1330.463531194),
        (-47.096761663, 13, -1334.713531194),
        (-48.502242328, 13, -1335.006424412),
        (-48.795135547, 13, -1336.213531194),
        (-48.502242328, 13, -1337.420637975),
        (-47.096761663, 13, -1337.713531194),
        (-46.398387779, 13, -1389.713531194),
        (-47.096761663, 13, -1441.713531194),
        (-48.502242328, 13, -1442.006424412),
        (-48.795135547, 13, -1443.213531194),
        (-48.502242328, 13, -1444.420637975),
        (-47.096761663, 13, -1444.713531194),
        (-46.398387779, 13, -1448.963531194),
        (-49.327319967, 13, -1460.284599005),
        (-67.759667403, 13, -1463.213531194),
        (-79.120947027, 13, -1462.213531194),
        (-79.413840246, 13, -1460.506424412),
        (-82.837683934, 13, -1460.213531194),
        (-86.261527622, 13, -1460.506424412),
        (-86.55442084, 13, -1462.213531194),
        (-98.47640431, 13, -1463.213531194),
        (-117.469455591, 13, -1460.284599005),
        (-120.398387779, 13, -1448.963531194),
        (-119.700013895, 13, -1444.713531194),
        (-118.29453323, 13, -1444.420637975),
        (-118.001640012, 13, -1443.213531194),
        (-118.29453323, 13, -1442.006424412),
        (-119.700013895, 13, -1441.713531194),
        (-120.398387779, 13, -1389.713531194),
        (-119.700013895, 13, -1337.713531194),
        (-118.29453323, 13, -1337.420637975),
        (-118.001640012, 13, -1336.213531194),
        (-118.29453323, 13, -1335.006424412),
        (-119.700013895, 13, -1334.713531194),
        (-120.398387779, 13, -1330.463531194),
        (-117.469455591, 13, -1319.142463382),
        (-98.47640431, 13, -1316.213531194),
        (-86.55442084, 13, -1317.213531194),
        (-104.60549456, 13, -1409.006424412),
        (-104.898387779, 13, -1429.213531194),
        (-104.60549456, 13, -1449.420637975),
        (-84.398387779, 13, -1449.713531194),
        (-64.191280998, 13, -1449.420637975),
        (-63.898387779, 13, -1429.213531194),
        (-64.191280998, 13, -1409.006424412),
        (-84.398387779, 13, -1408.713531194),
        (-84.398387779, 13, -1455.713531194),
        (-84.398387779, 13, -1405.713531194),
        (-60.233518182, 13, -1384.463742225),
        (-55.568648585, 13, -1364.463742225),
        (-55.861541804, 13, -1344.756635444),
        (-59.733518182, 13, -1344.463742225),
        (-63.60549456, 13, -1344.756635444),
        (-63.898387779, 13, -1346.588636709),
        (-64.60549456, 13, -1384.756635444),
        (-55.861541804, 13, -1384.170849006),
        (-64.191280998, 13, -1348.420637975),
    ]]
    fillet(fillet_4_edges, radius=FILLET_4_R - 0.0001)  # a hair under: the kernel refuses the full size

    # 草图3 → 切除-拉伸1 (cut)
    with BuildSketch(Plane(origin=(0.249036734, 0, -75.707167104), x_dir=(1, 0, 0), z_dir=(0, -1, 0))):
        with Locations(Location((-47.647424513, -1241.506364089, 0), (0, 0, 270))):
            Circle(SKETCH_3_R)
        with Locations(Location((-47.647424513, -1386.506364089, 0), (0, 0, 90))):
            Circle(SKETCH_3_R)
        with Locations(Location((-119.647424513, -1386.506364089, 0), (0, 0, 270))):
            Circle(SKETCH_3_R)
        with Locations(Location((-119.647424513, -1241.506364089, 0), (0, 0, 90))):
            Circle(SKETCH_3_R)
    extrude(amount=-CUT_EXTRUDE_1_DEPTH, mode=Mode.SUBTRACT)

    # 草图4 → 凸台-拉伸3 (add)
    with BuildSketch(Plane(origin=(0.249036734, 13, -75.707167104), x_dir=(1, 0, 0), z_dir=(0, -1, 0))):
        with BuildLine():
            Line((-92.147424513, -1320.506364089), (-66.038217179, -1320.506364089))
            Line((-66.038217179, -1320.506364089), (-66.038217179, -1323.506364089))
            ThreePointArc((-66.038217179, -1323.506364089), (-66.331110398, -1324.21347087), (-67.038217179, -1324.506364089))
            Line((-67.038217179, -1324.506364089), (-91.147424513, -1324.506364089))
            ThreePointArc((-91.147424513, -1324.506364089), (-91.854531294, -1324.21347087), (-92.147424513, -1323.506364089))
            Line((-92.147424513, -1323.506364089), (-92.147424513, -1320.506364089))
        make_face()
    extrude(amount=EXTRUDE_3_DEPTH)

    # 圆角6
    fillet_6_edges = [part.edges().sort_by_distance(p)[0] for p in [
        (-91.898387779, 10, -1397.713531194),
        (-91.60549456, 10, -1399.920637975),
        (-78.843784112, 10, -1400.213531194),
        (-66.082073664, 10, -1399.920637975),
        (-65.789180445, 10, -1397.713531194),
        (-78.843784112, 10, -1396.213531194),
    ]]
    fillet(fillet_6_edges, radius=FILLET_6_R)

    # 草图5 → 切除-拉伸2 (cut)
    with BuildSketch(Plane(origin=(0.249036734, 15, -75.707167104), x_dir=(1, 0, 0), z_dir=(0, 1, 0))):
        with Locations(Location((-58.147424513, 1320.006364089, 0), (0, 0, 270))):
            Circle(SKETCH_5_R)
        with Locations(Location((-53.147424513, 1307.506364089, 0), (0, 0, 270))):
            Circle(SKETCH_5_R)
        with Locations(Location((-53.147424513, 1332.506364089, 0), (0, 0, 270))):
            Circle(SKETCH_5_R)
        with Locations(Location((-114.147424513, 1332.506364089, 0), (0, 0, 270))):
            Circle(SKETCH_5_R)
        with Locations(Location((-114.147424513, 1307.506364089, 0), (0, 0, 270))):
            Circle(SKETCH_5_R)
        with Locations(Location((-109.147424513, 1320.006364089, 0), (0, 0, 270))):
            Circle(SKETCH_5_R)
    extrude(amount=-CUT_EXTRUDE_2_DEPTH, mode=Mode.SUBTRACT)

    # 草图6 → 凸台-拉伸4 (add)
    with BuildSketch(Plane.XZ.offset(EXTRUDE_START_2)):
        with BuildLine():
            Line((-47.898387779, -1314.713531194), (-118.898387779, -1314.713531194))
            ThreePointArc((-118.898387779, -1314.713531194), (-121.019708123, -1315.59221085), (-121.898387779, -1317.713531194))
            Line((-121.898387779, -1317.713531194), (-121.898387779, -1461.713531194))
            ThreePointArc((-121.898387779, -1461.713531194), (-121.019708123, -1463.834851537), (-118.898387779, -1464.713531194))
            Line((-118.898387779, -1464.713531194), (-47.898387779, -1464.713531194))
            ThreePointArc((-47.898387779, -1464.713531194), (-45.777067436, -1463.834851537), (-44.898387779, -1461.713531194))
            Line((-44.898387779, -1461.713531194), (-44.898387779, -1317.713531194))
            ThreePointArc((-44.898387779, -1317.713531194), (-45.777067436, -1315.59221085), (-47.898387779, -1314.713531194))
        make_face()
        with Locations(Location((-119.398387779, -1462.213531194, 0), (0, 0, 270))):
            Circle(SKETCH_6_R, mode=Mode.SUBTRACT)
        with Locations(Location((-119.398387779, -1317.213531194, 0), (0, 0, 270))):
            Circle(SKETCH_6_R, mode=Mode.SUBTRACT)
        with Locations(Location((-47.398387779, -1462.213531194, 0), (0, 0, 270))):
            Circle(SKETCH_6_R, mode=Mode.SUBTRACT)
        with Locations(Location((-47.398387779, -1317.213531194, 0), (0, 0, 270))):
            Circle(SKETCH_6_R, mode=Mode.SUBTRACT)
    extrude(amount=-EXTRUDE_4_DEPTH)

    # 草图7 → 切除-拉伸3 (cut)
    with BuildSketch(Plane(origin=(0, 15, 0), x_dir=(1, 0, 0), z_dir=(0, 1, 0))):
        with Locations((-86.571088428, 1387.361356575)):
            Rectangle(SKETCH_7_W, SKETCH_7_H)
    extrude(amount=-CUT_EXTRUDE_3_DEPTH, mode=Mode.SUBTRACT)

    # 草图8 → 切除-拉伸4 (cut)
    with BuildSketch(Plane.XZ.offset(1.5)):
        with Locations((-83.398387779, -1390.713531194)):
            Rectangle(SKETCH_8_W, SKETCH_8_H)
    extrude(amount=-CUT_EXTRUDE_4_DEPTH, mode=Mode.SUBTRACT)

    # 草图9 → 切除-拉伸5 (cut)
    with BuildSketch(Plane.XZ.offset(1.5)):
        Polygon((-81.363761094, -1321.208175621), (-81.363761094, -1322.709507196), (-86.637910806, -1326.609548937), (-86.637910806, -1325.108217362), align=None)
        Polygon((-81.52044595, -1318.547509884), (-81.52044595, -1320.048841458), (-83.937884263, -1321.836449099), (-83.937884263, -1320.335117525), align=None)
        Polygon((-84.153251374, -1325.852632827), (-84.153251374, -1327.353964401), (-86.570689687, -1329.141572042), (-86.570689687, -1327.640240468), align=None)
    extrude(amount=-CUT_EXTRUDE_5_DEPTH, mode=Mode.SUBTRACT)

    # 草图10 → 凸台-拉伸5 (add)
    with BuildSketch(Plane.XZ.offset(1.5)):
        with Locations((-83.398387779, -1333.713531194)):
            Rectangle(SKETCH_10_W, SKETCH_10_H)
        with Locations((-83.398387779, -1447.713531194)):
            Rectangle(SKETCH_10_W, SKETCH_10_H)
    extrude(amount=-EXTRUDE_5_DEPTH)

    # 草图11 → 切除-拉伸6 (cut)
    with BuildSketch(Plane.XZ.offset(1.5)):
        with Locations(Location((-46.898387779, -1389.713531194, 0), (0, 0, 270))):
            Circle(SKETCH_11_R)
        with Locations(Location((-119.898387779, -1389.713531194, 0), (0, 0, 270))):
            Circle(SKETCH_11_R)
    extrude(amount=-CUT_EXTRUDE_6_DEPTH, mode=Mode.SUBTRACT)


solid = part.part
